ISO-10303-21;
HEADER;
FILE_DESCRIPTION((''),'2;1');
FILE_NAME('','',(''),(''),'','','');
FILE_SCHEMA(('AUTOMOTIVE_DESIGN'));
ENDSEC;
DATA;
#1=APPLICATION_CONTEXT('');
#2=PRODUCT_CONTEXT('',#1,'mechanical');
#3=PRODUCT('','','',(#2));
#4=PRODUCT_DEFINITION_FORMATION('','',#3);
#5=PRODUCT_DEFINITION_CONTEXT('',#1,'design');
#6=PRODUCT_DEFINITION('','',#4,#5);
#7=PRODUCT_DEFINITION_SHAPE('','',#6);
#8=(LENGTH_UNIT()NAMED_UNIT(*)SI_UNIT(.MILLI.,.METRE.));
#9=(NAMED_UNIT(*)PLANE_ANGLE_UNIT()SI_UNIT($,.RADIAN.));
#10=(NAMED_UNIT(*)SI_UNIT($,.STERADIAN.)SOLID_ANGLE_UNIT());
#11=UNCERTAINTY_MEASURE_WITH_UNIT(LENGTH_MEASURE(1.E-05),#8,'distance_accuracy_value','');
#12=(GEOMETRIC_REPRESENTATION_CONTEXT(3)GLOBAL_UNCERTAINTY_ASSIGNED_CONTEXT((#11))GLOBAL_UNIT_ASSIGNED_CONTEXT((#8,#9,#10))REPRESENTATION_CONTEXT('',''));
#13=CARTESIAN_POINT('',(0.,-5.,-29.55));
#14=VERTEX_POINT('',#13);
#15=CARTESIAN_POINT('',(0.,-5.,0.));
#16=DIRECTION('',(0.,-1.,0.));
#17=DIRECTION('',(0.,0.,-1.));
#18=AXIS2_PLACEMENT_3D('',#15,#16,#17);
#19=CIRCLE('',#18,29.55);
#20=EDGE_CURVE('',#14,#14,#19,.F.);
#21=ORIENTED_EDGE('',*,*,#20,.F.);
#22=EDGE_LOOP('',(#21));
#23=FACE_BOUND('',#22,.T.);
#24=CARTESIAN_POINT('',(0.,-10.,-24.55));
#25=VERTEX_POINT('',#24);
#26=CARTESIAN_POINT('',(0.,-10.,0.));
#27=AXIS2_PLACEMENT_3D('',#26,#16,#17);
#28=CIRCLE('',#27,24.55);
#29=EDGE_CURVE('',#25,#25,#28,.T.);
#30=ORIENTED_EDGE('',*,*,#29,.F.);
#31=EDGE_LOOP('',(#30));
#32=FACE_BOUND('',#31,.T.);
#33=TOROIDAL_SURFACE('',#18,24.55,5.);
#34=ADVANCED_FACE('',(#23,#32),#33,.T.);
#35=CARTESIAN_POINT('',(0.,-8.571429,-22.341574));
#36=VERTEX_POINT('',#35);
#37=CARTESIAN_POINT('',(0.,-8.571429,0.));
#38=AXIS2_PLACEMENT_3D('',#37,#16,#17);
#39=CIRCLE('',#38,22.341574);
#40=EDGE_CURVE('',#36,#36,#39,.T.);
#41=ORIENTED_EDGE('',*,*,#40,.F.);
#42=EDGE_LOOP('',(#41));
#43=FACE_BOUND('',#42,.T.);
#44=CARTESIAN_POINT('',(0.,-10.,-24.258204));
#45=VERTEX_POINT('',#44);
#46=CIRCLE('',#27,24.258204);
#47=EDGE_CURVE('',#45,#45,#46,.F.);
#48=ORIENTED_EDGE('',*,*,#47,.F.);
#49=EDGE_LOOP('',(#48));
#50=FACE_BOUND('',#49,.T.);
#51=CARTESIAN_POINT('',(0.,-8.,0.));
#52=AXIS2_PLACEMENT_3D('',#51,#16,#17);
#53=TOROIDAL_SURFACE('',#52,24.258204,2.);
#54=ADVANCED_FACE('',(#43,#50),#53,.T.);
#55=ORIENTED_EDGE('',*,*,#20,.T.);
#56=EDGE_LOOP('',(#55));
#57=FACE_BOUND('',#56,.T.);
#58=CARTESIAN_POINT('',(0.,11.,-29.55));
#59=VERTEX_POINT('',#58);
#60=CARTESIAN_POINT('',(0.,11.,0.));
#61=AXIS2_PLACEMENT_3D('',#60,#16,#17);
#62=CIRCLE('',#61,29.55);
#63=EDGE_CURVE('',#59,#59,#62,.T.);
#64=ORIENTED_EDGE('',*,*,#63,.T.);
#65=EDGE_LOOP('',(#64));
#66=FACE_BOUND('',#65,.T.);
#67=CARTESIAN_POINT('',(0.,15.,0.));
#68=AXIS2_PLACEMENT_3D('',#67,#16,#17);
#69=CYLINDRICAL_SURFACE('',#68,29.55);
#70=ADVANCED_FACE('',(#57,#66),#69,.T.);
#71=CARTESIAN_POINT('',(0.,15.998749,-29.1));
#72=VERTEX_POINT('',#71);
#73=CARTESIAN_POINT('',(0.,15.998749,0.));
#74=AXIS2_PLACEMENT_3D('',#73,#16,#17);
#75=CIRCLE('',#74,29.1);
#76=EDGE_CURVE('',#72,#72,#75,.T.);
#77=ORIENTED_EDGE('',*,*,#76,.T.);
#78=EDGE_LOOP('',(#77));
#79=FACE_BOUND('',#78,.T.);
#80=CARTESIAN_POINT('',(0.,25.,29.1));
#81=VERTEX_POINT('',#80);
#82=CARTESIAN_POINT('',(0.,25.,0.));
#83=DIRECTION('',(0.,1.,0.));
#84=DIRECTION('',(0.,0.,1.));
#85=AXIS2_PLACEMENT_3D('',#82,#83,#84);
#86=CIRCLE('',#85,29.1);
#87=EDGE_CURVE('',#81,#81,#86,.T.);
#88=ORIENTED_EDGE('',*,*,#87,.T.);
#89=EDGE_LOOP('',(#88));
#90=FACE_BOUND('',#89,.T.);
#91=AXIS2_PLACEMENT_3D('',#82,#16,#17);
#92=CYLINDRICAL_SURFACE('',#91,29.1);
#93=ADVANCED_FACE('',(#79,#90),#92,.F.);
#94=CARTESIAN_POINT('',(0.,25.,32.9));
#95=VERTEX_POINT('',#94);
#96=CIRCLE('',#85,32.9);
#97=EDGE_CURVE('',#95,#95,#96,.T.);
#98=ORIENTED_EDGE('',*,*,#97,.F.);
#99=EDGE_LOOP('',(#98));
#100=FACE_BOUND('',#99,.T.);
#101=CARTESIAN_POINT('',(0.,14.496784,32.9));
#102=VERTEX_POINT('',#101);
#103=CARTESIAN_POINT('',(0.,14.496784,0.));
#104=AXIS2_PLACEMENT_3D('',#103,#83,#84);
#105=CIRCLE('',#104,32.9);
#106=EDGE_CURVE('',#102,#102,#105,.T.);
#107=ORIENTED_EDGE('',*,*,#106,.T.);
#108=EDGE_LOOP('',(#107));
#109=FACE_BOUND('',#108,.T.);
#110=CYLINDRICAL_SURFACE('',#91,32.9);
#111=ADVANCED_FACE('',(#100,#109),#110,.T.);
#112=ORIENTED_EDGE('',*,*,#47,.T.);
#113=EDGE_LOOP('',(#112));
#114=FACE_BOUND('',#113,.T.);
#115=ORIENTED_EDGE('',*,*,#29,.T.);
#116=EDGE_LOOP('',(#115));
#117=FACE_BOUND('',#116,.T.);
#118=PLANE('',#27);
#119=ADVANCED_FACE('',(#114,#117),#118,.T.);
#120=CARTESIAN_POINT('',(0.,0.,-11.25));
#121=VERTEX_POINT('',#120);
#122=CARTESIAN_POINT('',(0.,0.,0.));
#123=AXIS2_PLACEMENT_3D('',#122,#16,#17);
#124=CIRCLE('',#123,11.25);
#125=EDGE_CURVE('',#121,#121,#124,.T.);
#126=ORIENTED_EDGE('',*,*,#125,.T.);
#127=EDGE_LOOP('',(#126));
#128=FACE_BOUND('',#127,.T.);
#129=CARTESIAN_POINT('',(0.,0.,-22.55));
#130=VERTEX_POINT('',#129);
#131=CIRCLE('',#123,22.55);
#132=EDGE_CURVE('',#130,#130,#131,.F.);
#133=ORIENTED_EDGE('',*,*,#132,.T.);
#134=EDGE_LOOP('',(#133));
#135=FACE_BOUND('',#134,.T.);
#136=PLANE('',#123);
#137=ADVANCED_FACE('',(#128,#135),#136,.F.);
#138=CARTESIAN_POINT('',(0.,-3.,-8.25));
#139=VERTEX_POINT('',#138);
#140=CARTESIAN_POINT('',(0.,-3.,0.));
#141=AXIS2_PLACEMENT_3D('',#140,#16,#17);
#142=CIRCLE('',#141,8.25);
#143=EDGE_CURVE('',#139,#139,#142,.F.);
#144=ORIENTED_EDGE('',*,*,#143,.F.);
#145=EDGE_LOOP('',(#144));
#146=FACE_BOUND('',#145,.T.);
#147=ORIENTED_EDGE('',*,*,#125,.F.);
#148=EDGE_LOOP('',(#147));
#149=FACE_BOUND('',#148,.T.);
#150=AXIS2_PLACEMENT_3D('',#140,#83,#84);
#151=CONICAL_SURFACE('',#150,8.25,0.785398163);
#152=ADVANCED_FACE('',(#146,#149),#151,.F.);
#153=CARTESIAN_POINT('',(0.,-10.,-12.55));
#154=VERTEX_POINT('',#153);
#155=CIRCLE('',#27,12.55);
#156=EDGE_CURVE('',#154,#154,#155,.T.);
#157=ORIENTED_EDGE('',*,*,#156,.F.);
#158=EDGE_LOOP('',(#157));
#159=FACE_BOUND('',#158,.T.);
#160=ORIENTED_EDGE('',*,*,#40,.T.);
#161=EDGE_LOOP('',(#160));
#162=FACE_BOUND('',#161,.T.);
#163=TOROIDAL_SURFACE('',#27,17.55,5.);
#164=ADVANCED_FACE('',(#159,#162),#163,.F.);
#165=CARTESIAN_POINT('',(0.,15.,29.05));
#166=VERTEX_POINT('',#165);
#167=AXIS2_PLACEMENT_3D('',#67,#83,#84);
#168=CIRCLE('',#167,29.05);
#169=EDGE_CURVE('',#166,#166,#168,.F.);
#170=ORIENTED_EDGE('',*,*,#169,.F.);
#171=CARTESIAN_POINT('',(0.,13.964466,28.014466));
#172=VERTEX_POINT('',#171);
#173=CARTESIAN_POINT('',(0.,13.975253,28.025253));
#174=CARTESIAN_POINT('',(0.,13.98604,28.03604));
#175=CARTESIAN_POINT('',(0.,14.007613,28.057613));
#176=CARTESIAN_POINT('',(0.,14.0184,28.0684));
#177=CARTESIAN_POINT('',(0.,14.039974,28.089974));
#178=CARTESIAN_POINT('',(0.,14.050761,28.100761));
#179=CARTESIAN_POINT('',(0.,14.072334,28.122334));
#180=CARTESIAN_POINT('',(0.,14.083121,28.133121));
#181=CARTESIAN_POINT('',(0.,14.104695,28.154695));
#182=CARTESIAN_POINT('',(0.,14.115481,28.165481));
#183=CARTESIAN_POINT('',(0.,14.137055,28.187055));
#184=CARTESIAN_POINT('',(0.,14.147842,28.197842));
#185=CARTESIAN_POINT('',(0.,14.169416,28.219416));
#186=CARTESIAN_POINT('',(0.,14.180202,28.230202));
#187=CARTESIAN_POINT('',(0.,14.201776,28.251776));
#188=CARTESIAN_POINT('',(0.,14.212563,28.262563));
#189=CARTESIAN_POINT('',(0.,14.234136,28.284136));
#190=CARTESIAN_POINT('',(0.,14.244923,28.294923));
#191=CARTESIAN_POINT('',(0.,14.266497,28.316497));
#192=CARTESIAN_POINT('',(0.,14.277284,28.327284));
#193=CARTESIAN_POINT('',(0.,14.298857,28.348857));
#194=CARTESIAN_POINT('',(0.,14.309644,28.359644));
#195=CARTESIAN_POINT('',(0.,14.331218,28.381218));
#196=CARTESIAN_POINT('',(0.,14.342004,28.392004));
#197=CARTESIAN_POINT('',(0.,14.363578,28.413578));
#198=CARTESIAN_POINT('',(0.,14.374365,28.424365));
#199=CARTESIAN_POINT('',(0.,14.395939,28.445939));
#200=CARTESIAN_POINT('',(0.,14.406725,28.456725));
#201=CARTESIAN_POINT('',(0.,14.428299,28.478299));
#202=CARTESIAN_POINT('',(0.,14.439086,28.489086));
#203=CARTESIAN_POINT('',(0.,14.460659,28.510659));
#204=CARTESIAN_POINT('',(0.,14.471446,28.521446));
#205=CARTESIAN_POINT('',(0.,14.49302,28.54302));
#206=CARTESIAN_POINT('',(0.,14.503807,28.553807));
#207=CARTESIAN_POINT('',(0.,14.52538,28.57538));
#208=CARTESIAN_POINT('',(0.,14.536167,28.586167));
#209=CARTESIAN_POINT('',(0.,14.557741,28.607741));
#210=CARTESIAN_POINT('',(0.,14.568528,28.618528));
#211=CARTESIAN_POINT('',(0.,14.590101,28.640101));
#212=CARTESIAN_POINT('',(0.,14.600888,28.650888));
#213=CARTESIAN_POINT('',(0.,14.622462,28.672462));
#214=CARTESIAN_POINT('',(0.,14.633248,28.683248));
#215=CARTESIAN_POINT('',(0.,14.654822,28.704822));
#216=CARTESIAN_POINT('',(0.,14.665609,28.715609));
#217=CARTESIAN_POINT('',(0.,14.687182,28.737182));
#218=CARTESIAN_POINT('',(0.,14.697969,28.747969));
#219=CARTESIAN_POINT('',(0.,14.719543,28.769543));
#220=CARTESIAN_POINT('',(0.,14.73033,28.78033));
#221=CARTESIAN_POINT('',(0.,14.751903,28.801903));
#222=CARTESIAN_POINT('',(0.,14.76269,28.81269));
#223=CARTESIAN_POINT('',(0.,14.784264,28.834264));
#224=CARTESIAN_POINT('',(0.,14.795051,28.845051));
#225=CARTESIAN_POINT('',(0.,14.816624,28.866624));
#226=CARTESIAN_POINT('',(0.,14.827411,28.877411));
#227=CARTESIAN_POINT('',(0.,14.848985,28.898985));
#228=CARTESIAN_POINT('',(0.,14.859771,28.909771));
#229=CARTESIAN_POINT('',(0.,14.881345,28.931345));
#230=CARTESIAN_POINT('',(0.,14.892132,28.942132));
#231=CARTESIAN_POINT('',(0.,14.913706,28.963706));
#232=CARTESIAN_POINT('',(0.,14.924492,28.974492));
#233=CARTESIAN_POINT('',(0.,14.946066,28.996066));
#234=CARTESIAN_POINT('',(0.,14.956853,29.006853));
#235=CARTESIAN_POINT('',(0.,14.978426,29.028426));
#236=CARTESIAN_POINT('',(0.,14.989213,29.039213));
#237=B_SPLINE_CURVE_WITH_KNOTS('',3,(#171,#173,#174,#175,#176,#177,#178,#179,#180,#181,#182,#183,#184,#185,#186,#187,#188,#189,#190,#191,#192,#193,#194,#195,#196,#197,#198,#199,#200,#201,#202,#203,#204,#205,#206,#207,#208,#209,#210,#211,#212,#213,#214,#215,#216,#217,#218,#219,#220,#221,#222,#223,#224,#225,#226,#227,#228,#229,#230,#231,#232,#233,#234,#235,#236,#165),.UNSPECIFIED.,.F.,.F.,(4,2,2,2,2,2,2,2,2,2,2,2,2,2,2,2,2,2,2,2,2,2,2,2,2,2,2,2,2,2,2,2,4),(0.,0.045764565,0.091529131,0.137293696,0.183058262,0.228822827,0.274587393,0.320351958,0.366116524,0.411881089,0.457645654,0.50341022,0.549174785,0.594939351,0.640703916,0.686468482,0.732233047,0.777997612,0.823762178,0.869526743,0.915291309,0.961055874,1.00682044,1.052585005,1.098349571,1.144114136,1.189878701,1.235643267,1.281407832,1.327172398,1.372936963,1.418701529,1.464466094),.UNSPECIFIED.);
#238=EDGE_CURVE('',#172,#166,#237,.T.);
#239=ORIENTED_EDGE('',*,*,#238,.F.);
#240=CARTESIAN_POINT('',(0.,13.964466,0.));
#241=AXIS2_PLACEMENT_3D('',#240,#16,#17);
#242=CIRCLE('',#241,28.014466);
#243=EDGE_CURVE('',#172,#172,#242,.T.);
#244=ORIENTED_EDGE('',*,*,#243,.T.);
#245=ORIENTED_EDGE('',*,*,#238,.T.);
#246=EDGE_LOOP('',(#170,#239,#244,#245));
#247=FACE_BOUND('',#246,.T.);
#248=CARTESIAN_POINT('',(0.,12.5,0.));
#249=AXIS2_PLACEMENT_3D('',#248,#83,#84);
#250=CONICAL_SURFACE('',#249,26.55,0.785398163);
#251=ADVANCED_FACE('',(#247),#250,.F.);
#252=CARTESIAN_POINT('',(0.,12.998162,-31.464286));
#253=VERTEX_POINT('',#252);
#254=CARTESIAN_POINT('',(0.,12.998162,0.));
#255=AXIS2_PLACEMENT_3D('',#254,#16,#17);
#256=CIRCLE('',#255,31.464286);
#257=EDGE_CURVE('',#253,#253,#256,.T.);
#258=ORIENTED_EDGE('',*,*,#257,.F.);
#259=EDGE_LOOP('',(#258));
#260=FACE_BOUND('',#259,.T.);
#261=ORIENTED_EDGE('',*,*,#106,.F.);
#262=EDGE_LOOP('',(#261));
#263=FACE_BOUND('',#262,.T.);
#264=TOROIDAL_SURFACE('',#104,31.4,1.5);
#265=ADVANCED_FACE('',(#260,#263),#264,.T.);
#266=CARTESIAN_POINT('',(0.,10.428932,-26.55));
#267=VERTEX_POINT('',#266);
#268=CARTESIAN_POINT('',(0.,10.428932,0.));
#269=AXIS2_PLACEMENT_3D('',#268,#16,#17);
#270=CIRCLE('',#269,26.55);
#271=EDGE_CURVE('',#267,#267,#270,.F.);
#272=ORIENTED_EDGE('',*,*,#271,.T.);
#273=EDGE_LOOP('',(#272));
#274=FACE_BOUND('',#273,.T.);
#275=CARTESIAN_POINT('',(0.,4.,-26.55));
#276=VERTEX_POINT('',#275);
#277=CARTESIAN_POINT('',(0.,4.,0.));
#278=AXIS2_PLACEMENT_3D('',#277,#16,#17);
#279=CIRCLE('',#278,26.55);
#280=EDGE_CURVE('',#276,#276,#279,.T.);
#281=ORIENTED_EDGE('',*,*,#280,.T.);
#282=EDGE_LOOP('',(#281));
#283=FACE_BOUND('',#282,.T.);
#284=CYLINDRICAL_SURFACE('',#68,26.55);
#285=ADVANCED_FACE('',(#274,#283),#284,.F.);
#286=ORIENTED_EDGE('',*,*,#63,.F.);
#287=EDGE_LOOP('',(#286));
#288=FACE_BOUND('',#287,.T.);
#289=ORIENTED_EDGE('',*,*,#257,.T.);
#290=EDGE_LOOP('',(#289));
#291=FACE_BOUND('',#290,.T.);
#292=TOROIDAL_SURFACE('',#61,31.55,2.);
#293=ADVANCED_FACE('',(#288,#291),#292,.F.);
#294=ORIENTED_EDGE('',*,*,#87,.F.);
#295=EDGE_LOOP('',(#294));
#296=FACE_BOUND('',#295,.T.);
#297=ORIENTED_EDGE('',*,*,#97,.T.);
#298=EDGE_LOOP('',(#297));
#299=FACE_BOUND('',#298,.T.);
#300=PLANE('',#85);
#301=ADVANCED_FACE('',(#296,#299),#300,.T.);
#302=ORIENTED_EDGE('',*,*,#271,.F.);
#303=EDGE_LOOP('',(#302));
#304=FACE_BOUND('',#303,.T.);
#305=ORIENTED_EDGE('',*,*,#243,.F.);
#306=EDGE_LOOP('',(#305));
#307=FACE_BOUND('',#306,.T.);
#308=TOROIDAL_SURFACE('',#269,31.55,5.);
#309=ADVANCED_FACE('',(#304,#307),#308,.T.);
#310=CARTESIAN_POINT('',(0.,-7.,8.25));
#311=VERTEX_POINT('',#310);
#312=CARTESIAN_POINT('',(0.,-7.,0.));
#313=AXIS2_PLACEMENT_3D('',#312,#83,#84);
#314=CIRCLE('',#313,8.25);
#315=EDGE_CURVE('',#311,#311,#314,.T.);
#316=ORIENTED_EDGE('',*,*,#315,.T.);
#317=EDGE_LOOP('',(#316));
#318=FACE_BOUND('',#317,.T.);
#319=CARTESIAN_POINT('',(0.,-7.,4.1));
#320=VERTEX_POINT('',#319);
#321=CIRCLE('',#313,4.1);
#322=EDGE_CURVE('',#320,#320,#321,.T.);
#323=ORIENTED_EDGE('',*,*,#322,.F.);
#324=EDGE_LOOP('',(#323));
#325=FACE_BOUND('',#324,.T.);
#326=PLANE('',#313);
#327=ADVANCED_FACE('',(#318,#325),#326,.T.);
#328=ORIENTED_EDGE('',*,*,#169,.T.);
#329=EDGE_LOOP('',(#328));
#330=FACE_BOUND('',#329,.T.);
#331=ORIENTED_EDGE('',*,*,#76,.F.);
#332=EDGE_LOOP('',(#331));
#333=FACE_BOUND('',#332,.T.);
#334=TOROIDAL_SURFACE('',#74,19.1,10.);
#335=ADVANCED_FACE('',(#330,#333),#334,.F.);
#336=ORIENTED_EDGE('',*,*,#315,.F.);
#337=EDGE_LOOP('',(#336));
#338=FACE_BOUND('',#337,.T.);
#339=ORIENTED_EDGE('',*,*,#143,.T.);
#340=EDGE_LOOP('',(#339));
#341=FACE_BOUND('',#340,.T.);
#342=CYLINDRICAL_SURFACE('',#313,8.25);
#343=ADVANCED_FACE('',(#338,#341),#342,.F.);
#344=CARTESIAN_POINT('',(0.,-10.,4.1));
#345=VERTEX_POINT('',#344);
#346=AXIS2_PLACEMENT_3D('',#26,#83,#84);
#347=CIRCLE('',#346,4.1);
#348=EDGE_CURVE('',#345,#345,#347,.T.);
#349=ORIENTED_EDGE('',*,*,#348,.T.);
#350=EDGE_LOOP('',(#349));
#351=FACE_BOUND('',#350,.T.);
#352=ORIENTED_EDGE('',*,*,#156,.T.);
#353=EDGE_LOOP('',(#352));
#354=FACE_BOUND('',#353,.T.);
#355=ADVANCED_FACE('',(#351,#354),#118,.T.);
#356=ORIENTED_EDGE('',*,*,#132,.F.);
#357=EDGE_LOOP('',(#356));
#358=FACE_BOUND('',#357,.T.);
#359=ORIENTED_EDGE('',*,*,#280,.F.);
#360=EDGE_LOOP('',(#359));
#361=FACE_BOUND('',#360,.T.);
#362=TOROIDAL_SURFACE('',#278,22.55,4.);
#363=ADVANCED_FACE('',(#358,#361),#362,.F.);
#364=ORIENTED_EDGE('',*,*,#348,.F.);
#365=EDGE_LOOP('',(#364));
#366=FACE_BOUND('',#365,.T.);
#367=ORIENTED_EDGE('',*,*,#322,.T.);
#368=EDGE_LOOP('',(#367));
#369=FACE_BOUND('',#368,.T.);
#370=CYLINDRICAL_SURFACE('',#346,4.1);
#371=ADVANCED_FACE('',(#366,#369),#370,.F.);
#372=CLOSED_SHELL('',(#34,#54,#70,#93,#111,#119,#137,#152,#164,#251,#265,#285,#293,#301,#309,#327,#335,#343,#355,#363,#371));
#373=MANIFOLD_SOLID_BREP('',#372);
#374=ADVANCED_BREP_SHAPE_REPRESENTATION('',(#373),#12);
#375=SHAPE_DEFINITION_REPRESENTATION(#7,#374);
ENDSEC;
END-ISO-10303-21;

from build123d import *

# Parameters (mm, degrees)
SKETCH1_R           = 29.55
SKETCH1_R_2         = 26.55
BOSS_EXTRUDE1_DEPTH = 15
BOSS_EXTRUDE2_START = 10
SKETCH2_R           = 29.55
BOSS_EXTRUDE2_DEPTH = 10
CHAMFER1_SIZE       = 2.5
FILLET1_R           = 4
SKETCH4_R           = 32.9
SKETCH4_R_2         = 29.1
BOSS_EXTRUDE3_DEPTH = 10
BOSS_EXTRUDE4_START = 2
SKETCH5_R           = 32.9
SKETCH5_R_2         = 29.55
BOSS_EXTRUDE4_DEPTH = 2
FILLET3_R           = 2
FILLET6_R           = 5
FILLET7_R           = 5
FILLET8_R           = 1.5
SKETCH6_R           = 8.25
CUT_EXTRUDE1_DEPTH  = 7
CHAMFER4_SIZE       = 3
SKETCH7_R           = 4.1
CUT_EXTRUDE2_DEPTH  = 57.4696385
FILLET9_R           = 2
FILLET10_R          = 10


with BuildPart() as part:
    # Sketch1 → Boss-Extrude1 (new body)
    with BuildSketch(Plane(origin=(0, 0, 0), x_dir=(1, 0, 0), z_dir=(0, 1, 0))):
        with Locations(Location((0, 0, 0), (0, 0, 270))):
            Circle(SKETCH1_R)
        with Locations(Location((0, 0, 0), (0, 0, 270))):
            Circle(SKETCH1_R_2, mode=Mode.SUBTRACT)
    extrude(amount=BOSS_EXTRUDE1_DEPTH)

    # Sketch2 → Boss-Extrude2 (add)
    with BuildSketch(Plane.XZ.offset(BOSS_EXTRUDE2_START)):
        with Locations(Location((0, 0, 0), (0, 0, 270))):
            Circle(SKETCH2_R)
    extrude(amount=-BOSS_EXTRUDE2_DEPTH)

    # Chamfer1
    chamfer1_edges = [part.edges().sort_by_distance(p)[0] for p in [
        (0, 15, -26.55),
    ]]
    chamfer(chamfer1_edges, length=CHAMFER1_SIZE)

    # Fillet1
    fillet1_edges = [part.edges().sort_by_distance(p)[0] for p in [
        (0, 0, -26.55),
    ]]
    fillet(fillet1_edges, radius=FILLET1_R)

    # Sketch4 → Boss-Extrude3 (add)
    with BuildSketch(Plane(origin=(0, 15, 0), x_dir=(1, 0, 0), z_dir=(0, 1, 0))):
        with Locations(Location((0, 0, 0), (0, 0, 270))):
            Circle(SKETCH4_R)
        with Locations(Location((0, 0, 0), (0, 0, 270))):
            Circle(SKETCH4_R_2, mode=Mode.SUBTRACT)
    extrude(amount=BOSS_EXTRUDE3_DEPTH)

    # Sketch5 → Boss-Extrude4 (add)
    with BuildSketch(Plane.XZ.offset(-15).offset(BOSS_EXTRUDE4_START)):
        with Locations(Location((0, 0, 0), (0, 0, 270))):
            Circle(SKETCH5_R)
        with Locations(Location((0, 0, 0), (0, 0, 270))):
            Circle(SKETCH5_R_2, mode=Mode.SUBTRACT)
    extrude(amount=-BOSS_EXTRUDE4_DEPTH)

    # Fillet3
    fillet3_edges = [part.edges().sort_by_distance(p)[0] for p in [
        (0, 13, -29.55),
    ]]
    fillet(fillet3_edges, radius=FILLET3_R)

    # Fillet6
    fillet6_edges = [part.edges().sort_by_distance(p)[0] for p in [
        (0, 12.5, -26.55),
    ]]
    fillet(fillet6_edges, radius=FILLET6_R)

    # Fillet7
    fillet7_edges = [part.edges().sort_by_distance(p)[0] for p in [
        (0, -10, 29.55),
    ]]
    fillet(fillet7_edges, radius=FILLET7_R)

    # Fillet8
    fillet8_edges = [part.edges().sort_by_distance(p)[0] for p in [
        (0, 13, 32.9),
    ]]
    fillet(fillet8_edges, radius=FILLET8_R)

    # Sketch6 → Cut-Extrude1 (cut)
    with BuildSketch(Plane(origin=(0, 0, 0), x_dir=(1, 0, 0), z_dir=(0, 1, 0))):
        with Locations(Location((0, 0, 0), (0, 0, 270))):
            Circle(SKETCH6_R)
    extrude(amount=-CUT_EXTRUDE1_DEPTH, mode=Mode.SUBTRACT)

    # Chamfer4
    chamfer4_edges = [part.edges().sort_by_distance(p)[0] for p in [
        (0, 0, -8.25),
    ]]
    chamfer(chamfer4_edges, length=CHAMFER4_SIZE)

    # Sketch7 → Cut-Extrude2 (cut, through all)
    with BuildSketch(Plane(origin=(0, -7, 0), x_dir=(1, 0, 0), z_dir=(0, 1, 0))):
        with Locations(Location((0, 0, 0), (0, 0, 270))):
            Circle(SKETCH7_R)
    extrude(amount=-CUT_EXTRUDE2_DEPTH, mode=Mode.SUBTRACT)

    # Sketch8 → Cut-Revolve1 (revolve, cut)
    with BuildSketch(Plane.XY, mode=Mode.PRIVATE) as cut_revolve1_sk:
        with BuildLine():
            Line((22.55, -10), (12.55, -10))
            ThreePointArc((12.55, -10), (17.55, -5), (22.55, -10))
        make_face()
    revolve(cut_revolve1_sk.sketch.rotate(Axis((0, -10, 0), (0, 1, 0)), 90), axis=Axis((0, -10, 0), (0, 1, 0)), mode=Mode.SUBTRACT)

    # Fillet9
    fillet9_edges = [part.edges().sort_by_distance(p)[0] for p in [
        (0, -10, 22.55),
    ]]
    fillet(fillet9_edges, radius=FILLET9_R)

    # Fillet10
    # the kernel refuses this fillet: 10 mm, written as the material it adds along each edge
    with BuildSketch(Plane(origin=(0, 15, 0), x_dir=(0, 0, 1), z_dir=(-1, 0, 0))) as fillet10_piece_1:
        with BuildLine():
            CenterArc((19.1, 0.998749218), FILLET10_R, 354.268032035, 5.731967965)
            Line((29.05, 0), (29.1, 0))
            Line((29.1, 0), (29.1, 0.998749218))
        make_face()
    revolve(axis=Axis((0, 15, 0), (0, 1, 0)))


solid = part.part
